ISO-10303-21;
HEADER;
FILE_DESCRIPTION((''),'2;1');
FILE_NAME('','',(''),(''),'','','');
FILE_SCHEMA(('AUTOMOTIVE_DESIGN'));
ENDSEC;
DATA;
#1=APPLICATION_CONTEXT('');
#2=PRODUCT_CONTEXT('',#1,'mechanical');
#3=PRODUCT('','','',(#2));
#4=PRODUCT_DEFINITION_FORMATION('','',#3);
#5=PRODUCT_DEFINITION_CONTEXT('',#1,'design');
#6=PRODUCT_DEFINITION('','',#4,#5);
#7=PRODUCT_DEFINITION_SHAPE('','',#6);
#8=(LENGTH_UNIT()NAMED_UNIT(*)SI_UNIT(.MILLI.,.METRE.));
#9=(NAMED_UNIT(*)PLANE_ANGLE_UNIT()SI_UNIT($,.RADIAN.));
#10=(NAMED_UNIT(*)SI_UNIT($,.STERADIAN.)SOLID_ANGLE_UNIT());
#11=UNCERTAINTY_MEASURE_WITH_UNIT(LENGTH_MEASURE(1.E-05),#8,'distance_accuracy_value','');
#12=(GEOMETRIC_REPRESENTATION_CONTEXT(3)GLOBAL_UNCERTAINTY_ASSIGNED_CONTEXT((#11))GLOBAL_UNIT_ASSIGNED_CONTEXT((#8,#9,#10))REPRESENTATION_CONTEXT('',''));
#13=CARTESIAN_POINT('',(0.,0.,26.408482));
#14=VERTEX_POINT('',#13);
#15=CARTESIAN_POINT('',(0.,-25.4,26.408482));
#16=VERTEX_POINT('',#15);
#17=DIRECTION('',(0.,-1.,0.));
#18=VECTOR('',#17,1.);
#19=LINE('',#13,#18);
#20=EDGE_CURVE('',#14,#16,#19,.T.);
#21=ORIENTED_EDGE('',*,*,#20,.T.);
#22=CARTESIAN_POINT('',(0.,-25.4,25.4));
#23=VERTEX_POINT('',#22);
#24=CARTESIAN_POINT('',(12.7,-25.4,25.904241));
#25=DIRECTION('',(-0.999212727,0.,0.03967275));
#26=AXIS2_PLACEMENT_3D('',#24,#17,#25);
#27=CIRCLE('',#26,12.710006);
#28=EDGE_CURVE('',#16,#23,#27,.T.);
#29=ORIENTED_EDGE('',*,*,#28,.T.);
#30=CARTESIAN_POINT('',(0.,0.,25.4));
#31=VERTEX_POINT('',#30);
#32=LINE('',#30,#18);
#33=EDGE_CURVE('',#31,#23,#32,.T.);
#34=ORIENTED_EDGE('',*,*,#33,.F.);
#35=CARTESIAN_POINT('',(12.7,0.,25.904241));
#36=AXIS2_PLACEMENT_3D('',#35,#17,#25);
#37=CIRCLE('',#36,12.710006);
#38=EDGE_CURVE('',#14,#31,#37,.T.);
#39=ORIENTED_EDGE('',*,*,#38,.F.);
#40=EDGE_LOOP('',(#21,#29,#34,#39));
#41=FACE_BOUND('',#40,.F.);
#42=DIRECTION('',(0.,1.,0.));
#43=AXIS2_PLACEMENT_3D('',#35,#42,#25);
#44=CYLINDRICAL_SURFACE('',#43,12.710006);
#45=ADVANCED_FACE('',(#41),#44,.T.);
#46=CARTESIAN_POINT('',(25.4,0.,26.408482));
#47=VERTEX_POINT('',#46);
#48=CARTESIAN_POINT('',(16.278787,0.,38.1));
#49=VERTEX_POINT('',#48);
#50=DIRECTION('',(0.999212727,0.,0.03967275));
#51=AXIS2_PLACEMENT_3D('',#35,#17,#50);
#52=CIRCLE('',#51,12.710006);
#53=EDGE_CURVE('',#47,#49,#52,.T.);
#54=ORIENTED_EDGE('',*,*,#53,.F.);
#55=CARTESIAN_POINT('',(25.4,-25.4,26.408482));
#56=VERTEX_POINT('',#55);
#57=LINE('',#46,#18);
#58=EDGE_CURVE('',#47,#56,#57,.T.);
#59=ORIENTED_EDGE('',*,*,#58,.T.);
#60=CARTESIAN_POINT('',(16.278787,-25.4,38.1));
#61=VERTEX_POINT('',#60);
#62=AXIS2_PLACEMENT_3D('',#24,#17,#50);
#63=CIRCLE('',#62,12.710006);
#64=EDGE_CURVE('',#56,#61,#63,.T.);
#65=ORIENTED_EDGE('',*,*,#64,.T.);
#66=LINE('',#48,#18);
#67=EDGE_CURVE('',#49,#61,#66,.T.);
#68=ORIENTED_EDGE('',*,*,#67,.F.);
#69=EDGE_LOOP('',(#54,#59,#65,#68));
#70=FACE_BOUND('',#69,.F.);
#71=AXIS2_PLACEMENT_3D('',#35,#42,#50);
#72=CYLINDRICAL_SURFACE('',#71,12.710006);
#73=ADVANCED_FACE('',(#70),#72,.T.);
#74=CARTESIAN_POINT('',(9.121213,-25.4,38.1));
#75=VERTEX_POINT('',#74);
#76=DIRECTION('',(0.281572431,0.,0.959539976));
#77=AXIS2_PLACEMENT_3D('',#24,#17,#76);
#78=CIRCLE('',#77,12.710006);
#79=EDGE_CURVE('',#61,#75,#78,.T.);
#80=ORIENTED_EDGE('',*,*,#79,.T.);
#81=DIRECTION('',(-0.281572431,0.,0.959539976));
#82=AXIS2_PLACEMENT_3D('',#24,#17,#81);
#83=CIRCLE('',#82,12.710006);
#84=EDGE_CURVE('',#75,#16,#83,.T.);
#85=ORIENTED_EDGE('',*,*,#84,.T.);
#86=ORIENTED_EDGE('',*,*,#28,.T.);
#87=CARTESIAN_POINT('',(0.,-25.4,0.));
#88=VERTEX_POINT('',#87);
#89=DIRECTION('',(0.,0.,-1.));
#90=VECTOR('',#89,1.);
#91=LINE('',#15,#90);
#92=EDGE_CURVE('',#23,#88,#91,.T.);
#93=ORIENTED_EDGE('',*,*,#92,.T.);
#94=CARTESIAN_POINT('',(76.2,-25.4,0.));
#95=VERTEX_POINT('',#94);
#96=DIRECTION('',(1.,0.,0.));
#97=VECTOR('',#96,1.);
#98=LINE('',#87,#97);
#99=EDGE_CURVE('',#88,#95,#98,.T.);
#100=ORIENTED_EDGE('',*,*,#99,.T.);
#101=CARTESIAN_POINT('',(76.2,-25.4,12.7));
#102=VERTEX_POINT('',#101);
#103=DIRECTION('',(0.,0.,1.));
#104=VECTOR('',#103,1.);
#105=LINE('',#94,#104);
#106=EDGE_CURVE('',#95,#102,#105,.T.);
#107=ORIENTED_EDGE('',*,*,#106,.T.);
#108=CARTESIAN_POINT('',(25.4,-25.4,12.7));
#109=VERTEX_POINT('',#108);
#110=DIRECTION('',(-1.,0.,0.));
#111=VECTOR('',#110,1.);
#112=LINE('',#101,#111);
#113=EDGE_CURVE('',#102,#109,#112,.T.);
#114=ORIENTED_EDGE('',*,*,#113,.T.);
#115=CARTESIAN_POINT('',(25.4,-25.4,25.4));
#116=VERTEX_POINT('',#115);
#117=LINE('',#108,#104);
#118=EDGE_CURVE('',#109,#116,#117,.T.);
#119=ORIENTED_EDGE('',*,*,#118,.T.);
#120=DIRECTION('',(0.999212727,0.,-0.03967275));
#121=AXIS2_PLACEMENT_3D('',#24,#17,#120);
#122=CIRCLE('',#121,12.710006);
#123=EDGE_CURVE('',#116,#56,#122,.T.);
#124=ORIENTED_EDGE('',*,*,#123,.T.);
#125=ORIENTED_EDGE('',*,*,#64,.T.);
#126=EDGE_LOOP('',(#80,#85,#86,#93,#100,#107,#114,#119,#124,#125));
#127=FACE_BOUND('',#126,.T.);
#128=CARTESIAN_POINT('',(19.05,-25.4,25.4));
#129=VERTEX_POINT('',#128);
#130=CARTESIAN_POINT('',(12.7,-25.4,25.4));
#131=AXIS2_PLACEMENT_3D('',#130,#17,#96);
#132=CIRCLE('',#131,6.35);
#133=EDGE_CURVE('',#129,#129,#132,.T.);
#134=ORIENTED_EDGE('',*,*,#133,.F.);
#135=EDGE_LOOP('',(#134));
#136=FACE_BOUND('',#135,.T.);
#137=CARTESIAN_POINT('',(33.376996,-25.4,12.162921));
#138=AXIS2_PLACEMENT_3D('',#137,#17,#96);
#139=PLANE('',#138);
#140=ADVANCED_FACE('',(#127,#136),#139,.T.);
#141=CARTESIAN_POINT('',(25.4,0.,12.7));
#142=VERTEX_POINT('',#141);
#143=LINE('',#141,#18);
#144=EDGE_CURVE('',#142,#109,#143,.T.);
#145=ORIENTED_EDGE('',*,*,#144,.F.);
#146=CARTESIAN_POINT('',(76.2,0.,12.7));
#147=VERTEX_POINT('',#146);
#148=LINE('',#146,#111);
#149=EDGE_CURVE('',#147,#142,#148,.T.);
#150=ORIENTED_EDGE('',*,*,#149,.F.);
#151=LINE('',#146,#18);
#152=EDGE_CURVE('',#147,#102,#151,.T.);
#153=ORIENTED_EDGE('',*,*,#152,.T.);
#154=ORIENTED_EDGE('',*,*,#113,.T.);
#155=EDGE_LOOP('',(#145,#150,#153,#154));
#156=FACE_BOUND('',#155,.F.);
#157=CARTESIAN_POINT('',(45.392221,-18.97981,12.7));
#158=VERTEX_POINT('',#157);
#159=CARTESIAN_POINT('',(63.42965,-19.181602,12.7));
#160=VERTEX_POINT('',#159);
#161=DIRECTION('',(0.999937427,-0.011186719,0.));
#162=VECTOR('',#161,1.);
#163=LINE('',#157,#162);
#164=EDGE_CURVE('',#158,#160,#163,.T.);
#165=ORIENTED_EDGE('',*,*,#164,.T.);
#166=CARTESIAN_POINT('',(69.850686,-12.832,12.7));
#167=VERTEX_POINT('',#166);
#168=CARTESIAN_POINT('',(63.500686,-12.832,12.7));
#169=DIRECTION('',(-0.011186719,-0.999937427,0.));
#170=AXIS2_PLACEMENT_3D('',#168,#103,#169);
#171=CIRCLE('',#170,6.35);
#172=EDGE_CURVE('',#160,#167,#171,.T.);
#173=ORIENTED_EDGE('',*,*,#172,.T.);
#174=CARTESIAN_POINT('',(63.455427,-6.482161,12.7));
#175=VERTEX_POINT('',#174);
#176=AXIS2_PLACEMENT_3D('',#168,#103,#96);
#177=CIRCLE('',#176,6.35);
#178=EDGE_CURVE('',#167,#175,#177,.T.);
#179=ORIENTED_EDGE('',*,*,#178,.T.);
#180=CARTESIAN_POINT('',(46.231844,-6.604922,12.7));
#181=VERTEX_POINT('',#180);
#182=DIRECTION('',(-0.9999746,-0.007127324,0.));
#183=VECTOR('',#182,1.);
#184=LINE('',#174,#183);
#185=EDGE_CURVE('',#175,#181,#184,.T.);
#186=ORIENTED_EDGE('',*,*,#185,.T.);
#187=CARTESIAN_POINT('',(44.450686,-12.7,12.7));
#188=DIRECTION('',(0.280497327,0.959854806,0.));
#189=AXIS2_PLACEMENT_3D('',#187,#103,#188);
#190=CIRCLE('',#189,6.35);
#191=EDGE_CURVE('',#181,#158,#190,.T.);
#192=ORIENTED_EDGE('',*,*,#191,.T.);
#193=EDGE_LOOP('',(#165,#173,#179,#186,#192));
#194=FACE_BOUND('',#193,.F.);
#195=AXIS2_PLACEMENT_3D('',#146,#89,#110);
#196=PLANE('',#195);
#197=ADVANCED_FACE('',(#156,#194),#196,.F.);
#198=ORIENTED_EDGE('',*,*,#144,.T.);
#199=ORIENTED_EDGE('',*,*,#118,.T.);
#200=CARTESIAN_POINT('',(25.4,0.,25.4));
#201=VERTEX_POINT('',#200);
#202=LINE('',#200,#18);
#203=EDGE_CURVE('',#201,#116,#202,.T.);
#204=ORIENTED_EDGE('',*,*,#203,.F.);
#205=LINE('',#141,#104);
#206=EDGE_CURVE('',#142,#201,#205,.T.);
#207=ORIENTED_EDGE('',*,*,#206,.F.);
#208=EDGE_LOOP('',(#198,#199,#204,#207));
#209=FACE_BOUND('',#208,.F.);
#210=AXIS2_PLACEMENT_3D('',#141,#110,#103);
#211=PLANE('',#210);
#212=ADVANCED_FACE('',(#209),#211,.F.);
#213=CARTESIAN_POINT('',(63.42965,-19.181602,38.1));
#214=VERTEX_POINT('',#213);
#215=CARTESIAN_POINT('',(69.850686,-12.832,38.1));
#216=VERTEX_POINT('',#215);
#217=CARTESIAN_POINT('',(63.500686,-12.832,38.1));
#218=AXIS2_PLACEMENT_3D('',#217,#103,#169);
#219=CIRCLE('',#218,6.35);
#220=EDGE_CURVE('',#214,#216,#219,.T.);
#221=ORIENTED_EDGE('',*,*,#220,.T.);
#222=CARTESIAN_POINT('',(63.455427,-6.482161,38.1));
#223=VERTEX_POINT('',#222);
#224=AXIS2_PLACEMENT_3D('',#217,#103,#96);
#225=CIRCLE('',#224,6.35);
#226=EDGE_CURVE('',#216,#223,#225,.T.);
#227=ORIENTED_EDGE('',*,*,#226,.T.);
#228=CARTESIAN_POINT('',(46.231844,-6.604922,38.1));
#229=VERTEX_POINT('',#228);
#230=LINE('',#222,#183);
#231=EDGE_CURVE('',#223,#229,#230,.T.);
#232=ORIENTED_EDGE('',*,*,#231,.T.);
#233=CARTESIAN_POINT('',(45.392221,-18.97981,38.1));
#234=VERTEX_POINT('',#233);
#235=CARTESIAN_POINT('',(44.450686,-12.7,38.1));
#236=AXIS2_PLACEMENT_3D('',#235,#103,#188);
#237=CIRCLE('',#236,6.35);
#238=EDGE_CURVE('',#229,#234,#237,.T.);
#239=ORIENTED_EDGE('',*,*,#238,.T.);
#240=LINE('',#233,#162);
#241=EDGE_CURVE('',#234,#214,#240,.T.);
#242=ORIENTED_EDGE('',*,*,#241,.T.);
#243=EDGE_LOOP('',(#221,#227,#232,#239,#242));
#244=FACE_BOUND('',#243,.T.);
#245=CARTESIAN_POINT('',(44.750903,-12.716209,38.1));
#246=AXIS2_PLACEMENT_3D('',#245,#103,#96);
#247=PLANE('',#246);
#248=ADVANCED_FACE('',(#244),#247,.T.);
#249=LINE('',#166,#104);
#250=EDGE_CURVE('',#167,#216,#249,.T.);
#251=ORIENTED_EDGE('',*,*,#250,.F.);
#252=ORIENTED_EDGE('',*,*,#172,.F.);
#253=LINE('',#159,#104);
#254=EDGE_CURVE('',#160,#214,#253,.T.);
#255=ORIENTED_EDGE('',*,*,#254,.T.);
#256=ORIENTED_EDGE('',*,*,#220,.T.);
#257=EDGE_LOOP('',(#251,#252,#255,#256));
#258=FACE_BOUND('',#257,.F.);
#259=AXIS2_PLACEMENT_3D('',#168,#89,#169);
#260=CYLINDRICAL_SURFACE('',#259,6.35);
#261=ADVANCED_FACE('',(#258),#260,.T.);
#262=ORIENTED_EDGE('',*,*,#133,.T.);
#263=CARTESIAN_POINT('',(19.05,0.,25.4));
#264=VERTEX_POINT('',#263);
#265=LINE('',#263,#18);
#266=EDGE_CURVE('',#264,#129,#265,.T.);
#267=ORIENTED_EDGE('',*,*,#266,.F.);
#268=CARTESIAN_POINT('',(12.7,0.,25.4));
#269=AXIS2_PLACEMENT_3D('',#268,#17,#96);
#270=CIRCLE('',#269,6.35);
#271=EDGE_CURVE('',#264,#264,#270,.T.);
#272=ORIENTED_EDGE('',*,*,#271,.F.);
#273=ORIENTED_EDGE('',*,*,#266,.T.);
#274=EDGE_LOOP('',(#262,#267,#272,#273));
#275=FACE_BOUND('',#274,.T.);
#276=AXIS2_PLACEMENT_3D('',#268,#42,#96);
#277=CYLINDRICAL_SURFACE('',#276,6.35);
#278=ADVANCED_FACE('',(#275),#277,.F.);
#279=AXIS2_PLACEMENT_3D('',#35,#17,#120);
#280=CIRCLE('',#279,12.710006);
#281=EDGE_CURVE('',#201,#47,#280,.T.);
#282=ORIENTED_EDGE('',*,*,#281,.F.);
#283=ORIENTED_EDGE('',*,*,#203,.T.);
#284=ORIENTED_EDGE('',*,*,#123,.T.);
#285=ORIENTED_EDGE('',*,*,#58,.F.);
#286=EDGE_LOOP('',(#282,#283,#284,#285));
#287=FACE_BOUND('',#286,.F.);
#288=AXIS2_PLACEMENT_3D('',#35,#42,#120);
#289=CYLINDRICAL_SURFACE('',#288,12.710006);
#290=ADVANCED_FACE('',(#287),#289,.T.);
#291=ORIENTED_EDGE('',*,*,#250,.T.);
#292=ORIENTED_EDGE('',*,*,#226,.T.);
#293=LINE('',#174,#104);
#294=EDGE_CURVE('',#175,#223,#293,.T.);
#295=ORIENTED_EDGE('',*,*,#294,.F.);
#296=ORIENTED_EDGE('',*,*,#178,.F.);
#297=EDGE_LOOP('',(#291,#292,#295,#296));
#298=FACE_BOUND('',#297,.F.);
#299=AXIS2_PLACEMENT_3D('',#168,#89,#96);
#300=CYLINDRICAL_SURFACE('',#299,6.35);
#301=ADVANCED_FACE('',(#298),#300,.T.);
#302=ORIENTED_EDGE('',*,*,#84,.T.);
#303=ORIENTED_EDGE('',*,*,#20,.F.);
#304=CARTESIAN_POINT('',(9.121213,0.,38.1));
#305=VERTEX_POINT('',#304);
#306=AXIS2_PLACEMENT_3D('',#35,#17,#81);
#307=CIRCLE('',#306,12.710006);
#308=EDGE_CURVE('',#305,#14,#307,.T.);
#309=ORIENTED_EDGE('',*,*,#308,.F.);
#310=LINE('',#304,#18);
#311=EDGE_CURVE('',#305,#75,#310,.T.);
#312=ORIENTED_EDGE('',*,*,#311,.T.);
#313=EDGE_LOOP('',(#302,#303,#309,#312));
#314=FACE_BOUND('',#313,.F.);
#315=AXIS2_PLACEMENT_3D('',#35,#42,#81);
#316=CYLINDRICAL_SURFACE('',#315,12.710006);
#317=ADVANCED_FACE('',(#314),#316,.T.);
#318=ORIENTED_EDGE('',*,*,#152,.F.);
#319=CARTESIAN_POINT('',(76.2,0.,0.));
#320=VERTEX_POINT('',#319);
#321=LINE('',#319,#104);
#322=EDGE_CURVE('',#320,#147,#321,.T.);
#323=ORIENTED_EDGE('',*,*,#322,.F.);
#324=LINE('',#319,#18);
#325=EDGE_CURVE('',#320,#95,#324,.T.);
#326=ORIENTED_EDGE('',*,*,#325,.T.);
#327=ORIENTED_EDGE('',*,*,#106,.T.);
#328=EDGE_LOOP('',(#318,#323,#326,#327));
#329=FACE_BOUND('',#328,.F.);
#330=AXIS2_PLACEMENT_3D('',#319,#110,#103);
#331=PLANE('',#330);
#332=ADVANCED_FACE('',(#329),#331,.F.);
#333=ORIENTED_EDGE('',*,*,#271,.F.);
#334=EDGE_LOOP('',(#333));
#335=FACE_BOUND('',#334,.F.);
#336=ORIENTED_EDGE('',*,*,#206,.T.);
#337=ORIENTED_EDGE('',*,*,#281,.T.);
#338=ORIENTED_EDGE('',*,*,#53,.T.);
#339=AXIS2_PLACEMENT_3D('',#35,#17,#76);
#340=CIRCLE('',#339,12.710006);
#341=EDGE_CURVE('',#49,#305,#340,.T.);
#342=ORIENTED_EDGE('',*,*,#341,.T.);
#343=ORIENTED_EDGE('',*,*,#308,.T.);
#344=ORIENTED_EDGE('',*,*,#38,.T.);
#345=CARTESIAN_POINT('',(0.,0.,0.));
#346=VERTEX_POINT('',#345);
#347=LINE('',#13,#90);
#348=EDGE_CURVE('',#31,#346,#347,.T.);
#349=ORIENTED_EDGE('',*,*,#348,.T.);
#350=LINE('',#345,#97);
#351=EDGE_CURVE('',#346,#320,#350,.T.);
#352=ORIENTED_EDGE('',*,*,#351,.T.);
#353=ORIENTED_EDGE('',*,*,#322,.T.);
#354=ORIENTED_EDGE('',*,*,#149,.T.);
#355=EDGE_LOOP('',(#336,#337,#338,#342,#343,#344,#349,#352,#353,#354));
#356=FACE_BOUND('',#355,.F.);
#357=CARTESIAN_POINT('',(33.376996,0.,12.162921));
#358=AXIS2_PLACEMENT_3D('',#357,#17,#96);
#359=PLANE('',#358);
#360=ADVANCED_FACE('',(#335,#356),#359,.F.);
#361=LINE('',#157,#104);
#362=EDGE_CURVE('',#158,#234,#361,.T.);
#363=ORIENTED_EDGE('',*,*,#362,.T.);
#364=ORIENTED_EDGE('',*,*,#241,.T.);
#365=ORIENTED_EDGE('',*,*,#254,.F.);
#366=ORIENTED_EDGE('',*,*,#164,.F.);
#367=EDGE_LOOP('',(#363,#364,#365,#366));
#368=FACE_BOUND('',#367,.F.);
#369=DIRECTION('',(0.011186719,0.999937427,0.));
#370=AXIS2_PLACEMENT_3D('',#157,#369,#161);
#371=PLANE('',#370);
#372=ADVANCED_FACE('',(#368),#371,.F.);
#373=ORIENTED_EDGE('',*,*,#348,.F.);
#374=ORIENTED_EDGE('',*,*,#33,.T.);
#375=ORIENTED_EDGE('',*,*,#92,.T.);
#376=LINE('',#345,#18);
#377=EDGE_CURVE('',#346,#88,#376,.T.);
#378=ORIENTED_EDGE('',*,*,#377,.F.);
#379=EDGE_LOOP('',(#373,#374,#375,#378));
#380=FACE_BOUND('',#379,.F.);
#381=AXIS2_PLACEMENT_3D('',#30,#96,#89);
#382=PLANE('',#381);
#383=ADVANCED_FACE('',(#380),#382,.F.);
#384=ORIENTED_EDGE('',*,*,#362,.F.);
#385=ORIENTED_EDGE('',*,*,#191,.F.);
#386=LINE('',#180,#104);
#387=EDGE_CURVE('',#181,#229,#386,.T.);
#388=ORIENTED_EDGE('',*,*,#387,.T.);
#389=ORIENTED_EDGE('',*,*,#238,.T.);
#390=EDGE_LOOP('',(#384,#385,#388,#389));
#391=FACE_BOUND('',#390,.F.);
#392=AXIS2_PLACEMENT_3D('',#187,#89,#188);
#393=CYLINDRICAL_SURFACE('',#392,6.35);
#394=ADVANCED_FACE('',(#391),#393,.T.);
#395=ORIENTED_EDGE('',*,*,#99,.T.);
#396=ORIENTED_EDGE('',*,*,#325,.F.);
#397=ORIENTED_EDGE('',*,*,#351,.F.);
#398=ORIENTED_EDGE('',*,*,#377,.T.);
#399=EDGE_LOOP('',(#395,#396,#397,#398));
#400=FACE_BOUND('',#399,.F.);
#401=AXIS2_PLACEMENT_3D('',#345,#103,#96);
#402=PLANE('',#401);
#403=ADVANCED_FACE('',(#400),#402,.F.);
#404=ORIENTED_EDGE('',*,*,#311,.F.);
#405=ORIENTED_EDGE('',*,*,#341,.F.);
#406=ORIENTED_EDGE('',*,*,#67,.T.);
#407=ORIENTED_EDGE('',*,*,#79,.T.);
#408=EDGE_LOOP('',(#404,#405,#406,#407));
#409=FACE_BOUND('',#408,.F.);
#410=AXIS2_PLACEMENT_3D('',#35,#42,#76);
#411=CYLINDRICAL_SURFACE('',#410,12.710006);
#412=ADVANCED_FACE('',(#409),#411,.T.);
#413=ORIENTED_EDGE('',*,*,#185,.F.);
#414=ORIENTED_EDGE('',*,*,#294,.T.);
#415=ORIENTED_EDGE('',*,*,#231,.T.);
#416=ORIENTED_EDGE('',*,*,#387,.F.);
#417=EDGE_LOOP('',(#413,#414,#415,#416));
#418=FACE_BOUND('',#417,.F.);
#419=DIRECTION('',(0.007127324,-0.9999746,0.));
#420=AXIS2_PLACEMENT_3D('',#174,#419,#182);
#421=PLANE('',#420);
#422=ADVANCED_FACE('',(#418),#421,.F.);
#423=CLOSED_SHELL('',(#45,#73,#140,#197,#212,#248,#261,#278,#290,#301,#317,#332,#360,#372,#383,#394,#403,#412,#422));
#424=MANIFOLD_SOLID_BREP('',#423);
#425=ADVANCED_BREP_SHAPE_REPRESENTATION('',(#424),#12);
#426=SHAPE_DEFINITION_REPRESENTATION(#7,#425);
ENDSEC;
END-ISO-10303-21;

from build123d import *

# Parameters (mm, degrees)
F0_R     = 6.35
F1_DEPTH = 25.4
F3_DEPTH = 25.4


with BuildPart() as f1:
    # F0 (on Front) → F1 (new body)
    with BuildSketch(Plane.XZ):
        with BuildLine():
            Line((0, 25.4), (0, 0))
            Line((0, 0), (76.2, 0))
            Line((76.2, 0), (76.2, 12.7))
            Line((76.2, 12.7), (25.4, 12.7))
            Line((25.4, 12.7), (25.4, 25.4))
            Line((25.4, 25.4), (25.4, 26.4084818092))
            ThreePointArc((25.4, 26.4084818092), (22.7211091646, 33.7222732658), (16.2787873612, 38.1))
            Line((16.2787873612, 38.1), (9.1212126388, 38.1))
            ThreePointArc((9.1212126388, 38.1), (2.6788908354, 33.7222732658), (0, 26.4084818092))
            Line((0, 26.4084818092), (0, 25.4))
        make_face()
        with Locations((12.7, 25.4)):
            Circle(F0_R, mode=Mode.SUBTRACT)
        with BuildLine():
            ThreePointArc((0, 26.4084818092), (-0.0100062506, 25.9042409046), (0, 25.4))
            Line((0, 25.4), (0, 26.4084818092))
        make_face()
        with BuildLine():
            ThreePointArc((16.2787873612, 38.1), (12.7, 38.6142471552), (9.1212126388, 38.1))
            Line((9.1212126388, 38.1), (16.2787873612, 38.1))
        make_face()
        with BuildLine():
            Line((25.4, 26.4084818092), (25.4, 25.4))
            ThreePointArc((25.4, 25.4), (25.4100062506, 25.9042409046), (25.4, 26.4084818092))
        make_face()
    extrude(amount=F1_DEPTH)

    # F2 (on face) → F3 (join)
    with BuildSketch(Plane.XY.offset(12.7)):
        with BuildLine():
            ThreePointArc((45.3922208286, -18.9798098827), (49.2621954374, -16.8438963443), (50.8006859977, -12.7))
            ThreePointArc((50.8006859977, -12.7), (49.5316727855, -8.8913160721), (46.2318440252, -6.6049219791))
            ThreePointArc((46.2318440252, -6.6049219791), (38.1152517777, -12.2701474168), (45.3922208286, -18.9798098827))
        make_face()
        with BuildLine():
            ThreePointArc((69.8506859977, -12.8319995129), (67.9747841458, -8.325898564), (63.4554274902, -6.482160801))
            ThreePointArc((63.4554274902, -6.482160801), (57.1506990788, -12.8191103921), (63.4296503294, -19.1816021724))
            ThreePointArc((63.4296503294, -19.1816021724), (67.9656285229, -17.3471726266), (69.8506859977, -12.8319995129))
        make_face()
        with BuildLine():
            ThreePointArc((46.2318440252, -6.6049219791), (49.5316727855, -8.8913160721), (50.8006859977, -12.7))
            ThreePointArc((50.8006859977, -12.7), (49.2621954374, -16.8438963443), (45.3922208286, -18.9798098827))
            Line((45.3922208286, -18.9798098827), (63.4296503294, -19.1816021724))
            ThreePointArc((63.4296503294, -19.1816021724), (57.1506990788, -12.8191103921), (63.4554274902, -6.482160801))
            Line((63.4554274902, -6.482160801), (46.2318440252, -6.6049219791))
        make_face()
    extrude(amount=F3_DEPTH)


solid = f1.part
